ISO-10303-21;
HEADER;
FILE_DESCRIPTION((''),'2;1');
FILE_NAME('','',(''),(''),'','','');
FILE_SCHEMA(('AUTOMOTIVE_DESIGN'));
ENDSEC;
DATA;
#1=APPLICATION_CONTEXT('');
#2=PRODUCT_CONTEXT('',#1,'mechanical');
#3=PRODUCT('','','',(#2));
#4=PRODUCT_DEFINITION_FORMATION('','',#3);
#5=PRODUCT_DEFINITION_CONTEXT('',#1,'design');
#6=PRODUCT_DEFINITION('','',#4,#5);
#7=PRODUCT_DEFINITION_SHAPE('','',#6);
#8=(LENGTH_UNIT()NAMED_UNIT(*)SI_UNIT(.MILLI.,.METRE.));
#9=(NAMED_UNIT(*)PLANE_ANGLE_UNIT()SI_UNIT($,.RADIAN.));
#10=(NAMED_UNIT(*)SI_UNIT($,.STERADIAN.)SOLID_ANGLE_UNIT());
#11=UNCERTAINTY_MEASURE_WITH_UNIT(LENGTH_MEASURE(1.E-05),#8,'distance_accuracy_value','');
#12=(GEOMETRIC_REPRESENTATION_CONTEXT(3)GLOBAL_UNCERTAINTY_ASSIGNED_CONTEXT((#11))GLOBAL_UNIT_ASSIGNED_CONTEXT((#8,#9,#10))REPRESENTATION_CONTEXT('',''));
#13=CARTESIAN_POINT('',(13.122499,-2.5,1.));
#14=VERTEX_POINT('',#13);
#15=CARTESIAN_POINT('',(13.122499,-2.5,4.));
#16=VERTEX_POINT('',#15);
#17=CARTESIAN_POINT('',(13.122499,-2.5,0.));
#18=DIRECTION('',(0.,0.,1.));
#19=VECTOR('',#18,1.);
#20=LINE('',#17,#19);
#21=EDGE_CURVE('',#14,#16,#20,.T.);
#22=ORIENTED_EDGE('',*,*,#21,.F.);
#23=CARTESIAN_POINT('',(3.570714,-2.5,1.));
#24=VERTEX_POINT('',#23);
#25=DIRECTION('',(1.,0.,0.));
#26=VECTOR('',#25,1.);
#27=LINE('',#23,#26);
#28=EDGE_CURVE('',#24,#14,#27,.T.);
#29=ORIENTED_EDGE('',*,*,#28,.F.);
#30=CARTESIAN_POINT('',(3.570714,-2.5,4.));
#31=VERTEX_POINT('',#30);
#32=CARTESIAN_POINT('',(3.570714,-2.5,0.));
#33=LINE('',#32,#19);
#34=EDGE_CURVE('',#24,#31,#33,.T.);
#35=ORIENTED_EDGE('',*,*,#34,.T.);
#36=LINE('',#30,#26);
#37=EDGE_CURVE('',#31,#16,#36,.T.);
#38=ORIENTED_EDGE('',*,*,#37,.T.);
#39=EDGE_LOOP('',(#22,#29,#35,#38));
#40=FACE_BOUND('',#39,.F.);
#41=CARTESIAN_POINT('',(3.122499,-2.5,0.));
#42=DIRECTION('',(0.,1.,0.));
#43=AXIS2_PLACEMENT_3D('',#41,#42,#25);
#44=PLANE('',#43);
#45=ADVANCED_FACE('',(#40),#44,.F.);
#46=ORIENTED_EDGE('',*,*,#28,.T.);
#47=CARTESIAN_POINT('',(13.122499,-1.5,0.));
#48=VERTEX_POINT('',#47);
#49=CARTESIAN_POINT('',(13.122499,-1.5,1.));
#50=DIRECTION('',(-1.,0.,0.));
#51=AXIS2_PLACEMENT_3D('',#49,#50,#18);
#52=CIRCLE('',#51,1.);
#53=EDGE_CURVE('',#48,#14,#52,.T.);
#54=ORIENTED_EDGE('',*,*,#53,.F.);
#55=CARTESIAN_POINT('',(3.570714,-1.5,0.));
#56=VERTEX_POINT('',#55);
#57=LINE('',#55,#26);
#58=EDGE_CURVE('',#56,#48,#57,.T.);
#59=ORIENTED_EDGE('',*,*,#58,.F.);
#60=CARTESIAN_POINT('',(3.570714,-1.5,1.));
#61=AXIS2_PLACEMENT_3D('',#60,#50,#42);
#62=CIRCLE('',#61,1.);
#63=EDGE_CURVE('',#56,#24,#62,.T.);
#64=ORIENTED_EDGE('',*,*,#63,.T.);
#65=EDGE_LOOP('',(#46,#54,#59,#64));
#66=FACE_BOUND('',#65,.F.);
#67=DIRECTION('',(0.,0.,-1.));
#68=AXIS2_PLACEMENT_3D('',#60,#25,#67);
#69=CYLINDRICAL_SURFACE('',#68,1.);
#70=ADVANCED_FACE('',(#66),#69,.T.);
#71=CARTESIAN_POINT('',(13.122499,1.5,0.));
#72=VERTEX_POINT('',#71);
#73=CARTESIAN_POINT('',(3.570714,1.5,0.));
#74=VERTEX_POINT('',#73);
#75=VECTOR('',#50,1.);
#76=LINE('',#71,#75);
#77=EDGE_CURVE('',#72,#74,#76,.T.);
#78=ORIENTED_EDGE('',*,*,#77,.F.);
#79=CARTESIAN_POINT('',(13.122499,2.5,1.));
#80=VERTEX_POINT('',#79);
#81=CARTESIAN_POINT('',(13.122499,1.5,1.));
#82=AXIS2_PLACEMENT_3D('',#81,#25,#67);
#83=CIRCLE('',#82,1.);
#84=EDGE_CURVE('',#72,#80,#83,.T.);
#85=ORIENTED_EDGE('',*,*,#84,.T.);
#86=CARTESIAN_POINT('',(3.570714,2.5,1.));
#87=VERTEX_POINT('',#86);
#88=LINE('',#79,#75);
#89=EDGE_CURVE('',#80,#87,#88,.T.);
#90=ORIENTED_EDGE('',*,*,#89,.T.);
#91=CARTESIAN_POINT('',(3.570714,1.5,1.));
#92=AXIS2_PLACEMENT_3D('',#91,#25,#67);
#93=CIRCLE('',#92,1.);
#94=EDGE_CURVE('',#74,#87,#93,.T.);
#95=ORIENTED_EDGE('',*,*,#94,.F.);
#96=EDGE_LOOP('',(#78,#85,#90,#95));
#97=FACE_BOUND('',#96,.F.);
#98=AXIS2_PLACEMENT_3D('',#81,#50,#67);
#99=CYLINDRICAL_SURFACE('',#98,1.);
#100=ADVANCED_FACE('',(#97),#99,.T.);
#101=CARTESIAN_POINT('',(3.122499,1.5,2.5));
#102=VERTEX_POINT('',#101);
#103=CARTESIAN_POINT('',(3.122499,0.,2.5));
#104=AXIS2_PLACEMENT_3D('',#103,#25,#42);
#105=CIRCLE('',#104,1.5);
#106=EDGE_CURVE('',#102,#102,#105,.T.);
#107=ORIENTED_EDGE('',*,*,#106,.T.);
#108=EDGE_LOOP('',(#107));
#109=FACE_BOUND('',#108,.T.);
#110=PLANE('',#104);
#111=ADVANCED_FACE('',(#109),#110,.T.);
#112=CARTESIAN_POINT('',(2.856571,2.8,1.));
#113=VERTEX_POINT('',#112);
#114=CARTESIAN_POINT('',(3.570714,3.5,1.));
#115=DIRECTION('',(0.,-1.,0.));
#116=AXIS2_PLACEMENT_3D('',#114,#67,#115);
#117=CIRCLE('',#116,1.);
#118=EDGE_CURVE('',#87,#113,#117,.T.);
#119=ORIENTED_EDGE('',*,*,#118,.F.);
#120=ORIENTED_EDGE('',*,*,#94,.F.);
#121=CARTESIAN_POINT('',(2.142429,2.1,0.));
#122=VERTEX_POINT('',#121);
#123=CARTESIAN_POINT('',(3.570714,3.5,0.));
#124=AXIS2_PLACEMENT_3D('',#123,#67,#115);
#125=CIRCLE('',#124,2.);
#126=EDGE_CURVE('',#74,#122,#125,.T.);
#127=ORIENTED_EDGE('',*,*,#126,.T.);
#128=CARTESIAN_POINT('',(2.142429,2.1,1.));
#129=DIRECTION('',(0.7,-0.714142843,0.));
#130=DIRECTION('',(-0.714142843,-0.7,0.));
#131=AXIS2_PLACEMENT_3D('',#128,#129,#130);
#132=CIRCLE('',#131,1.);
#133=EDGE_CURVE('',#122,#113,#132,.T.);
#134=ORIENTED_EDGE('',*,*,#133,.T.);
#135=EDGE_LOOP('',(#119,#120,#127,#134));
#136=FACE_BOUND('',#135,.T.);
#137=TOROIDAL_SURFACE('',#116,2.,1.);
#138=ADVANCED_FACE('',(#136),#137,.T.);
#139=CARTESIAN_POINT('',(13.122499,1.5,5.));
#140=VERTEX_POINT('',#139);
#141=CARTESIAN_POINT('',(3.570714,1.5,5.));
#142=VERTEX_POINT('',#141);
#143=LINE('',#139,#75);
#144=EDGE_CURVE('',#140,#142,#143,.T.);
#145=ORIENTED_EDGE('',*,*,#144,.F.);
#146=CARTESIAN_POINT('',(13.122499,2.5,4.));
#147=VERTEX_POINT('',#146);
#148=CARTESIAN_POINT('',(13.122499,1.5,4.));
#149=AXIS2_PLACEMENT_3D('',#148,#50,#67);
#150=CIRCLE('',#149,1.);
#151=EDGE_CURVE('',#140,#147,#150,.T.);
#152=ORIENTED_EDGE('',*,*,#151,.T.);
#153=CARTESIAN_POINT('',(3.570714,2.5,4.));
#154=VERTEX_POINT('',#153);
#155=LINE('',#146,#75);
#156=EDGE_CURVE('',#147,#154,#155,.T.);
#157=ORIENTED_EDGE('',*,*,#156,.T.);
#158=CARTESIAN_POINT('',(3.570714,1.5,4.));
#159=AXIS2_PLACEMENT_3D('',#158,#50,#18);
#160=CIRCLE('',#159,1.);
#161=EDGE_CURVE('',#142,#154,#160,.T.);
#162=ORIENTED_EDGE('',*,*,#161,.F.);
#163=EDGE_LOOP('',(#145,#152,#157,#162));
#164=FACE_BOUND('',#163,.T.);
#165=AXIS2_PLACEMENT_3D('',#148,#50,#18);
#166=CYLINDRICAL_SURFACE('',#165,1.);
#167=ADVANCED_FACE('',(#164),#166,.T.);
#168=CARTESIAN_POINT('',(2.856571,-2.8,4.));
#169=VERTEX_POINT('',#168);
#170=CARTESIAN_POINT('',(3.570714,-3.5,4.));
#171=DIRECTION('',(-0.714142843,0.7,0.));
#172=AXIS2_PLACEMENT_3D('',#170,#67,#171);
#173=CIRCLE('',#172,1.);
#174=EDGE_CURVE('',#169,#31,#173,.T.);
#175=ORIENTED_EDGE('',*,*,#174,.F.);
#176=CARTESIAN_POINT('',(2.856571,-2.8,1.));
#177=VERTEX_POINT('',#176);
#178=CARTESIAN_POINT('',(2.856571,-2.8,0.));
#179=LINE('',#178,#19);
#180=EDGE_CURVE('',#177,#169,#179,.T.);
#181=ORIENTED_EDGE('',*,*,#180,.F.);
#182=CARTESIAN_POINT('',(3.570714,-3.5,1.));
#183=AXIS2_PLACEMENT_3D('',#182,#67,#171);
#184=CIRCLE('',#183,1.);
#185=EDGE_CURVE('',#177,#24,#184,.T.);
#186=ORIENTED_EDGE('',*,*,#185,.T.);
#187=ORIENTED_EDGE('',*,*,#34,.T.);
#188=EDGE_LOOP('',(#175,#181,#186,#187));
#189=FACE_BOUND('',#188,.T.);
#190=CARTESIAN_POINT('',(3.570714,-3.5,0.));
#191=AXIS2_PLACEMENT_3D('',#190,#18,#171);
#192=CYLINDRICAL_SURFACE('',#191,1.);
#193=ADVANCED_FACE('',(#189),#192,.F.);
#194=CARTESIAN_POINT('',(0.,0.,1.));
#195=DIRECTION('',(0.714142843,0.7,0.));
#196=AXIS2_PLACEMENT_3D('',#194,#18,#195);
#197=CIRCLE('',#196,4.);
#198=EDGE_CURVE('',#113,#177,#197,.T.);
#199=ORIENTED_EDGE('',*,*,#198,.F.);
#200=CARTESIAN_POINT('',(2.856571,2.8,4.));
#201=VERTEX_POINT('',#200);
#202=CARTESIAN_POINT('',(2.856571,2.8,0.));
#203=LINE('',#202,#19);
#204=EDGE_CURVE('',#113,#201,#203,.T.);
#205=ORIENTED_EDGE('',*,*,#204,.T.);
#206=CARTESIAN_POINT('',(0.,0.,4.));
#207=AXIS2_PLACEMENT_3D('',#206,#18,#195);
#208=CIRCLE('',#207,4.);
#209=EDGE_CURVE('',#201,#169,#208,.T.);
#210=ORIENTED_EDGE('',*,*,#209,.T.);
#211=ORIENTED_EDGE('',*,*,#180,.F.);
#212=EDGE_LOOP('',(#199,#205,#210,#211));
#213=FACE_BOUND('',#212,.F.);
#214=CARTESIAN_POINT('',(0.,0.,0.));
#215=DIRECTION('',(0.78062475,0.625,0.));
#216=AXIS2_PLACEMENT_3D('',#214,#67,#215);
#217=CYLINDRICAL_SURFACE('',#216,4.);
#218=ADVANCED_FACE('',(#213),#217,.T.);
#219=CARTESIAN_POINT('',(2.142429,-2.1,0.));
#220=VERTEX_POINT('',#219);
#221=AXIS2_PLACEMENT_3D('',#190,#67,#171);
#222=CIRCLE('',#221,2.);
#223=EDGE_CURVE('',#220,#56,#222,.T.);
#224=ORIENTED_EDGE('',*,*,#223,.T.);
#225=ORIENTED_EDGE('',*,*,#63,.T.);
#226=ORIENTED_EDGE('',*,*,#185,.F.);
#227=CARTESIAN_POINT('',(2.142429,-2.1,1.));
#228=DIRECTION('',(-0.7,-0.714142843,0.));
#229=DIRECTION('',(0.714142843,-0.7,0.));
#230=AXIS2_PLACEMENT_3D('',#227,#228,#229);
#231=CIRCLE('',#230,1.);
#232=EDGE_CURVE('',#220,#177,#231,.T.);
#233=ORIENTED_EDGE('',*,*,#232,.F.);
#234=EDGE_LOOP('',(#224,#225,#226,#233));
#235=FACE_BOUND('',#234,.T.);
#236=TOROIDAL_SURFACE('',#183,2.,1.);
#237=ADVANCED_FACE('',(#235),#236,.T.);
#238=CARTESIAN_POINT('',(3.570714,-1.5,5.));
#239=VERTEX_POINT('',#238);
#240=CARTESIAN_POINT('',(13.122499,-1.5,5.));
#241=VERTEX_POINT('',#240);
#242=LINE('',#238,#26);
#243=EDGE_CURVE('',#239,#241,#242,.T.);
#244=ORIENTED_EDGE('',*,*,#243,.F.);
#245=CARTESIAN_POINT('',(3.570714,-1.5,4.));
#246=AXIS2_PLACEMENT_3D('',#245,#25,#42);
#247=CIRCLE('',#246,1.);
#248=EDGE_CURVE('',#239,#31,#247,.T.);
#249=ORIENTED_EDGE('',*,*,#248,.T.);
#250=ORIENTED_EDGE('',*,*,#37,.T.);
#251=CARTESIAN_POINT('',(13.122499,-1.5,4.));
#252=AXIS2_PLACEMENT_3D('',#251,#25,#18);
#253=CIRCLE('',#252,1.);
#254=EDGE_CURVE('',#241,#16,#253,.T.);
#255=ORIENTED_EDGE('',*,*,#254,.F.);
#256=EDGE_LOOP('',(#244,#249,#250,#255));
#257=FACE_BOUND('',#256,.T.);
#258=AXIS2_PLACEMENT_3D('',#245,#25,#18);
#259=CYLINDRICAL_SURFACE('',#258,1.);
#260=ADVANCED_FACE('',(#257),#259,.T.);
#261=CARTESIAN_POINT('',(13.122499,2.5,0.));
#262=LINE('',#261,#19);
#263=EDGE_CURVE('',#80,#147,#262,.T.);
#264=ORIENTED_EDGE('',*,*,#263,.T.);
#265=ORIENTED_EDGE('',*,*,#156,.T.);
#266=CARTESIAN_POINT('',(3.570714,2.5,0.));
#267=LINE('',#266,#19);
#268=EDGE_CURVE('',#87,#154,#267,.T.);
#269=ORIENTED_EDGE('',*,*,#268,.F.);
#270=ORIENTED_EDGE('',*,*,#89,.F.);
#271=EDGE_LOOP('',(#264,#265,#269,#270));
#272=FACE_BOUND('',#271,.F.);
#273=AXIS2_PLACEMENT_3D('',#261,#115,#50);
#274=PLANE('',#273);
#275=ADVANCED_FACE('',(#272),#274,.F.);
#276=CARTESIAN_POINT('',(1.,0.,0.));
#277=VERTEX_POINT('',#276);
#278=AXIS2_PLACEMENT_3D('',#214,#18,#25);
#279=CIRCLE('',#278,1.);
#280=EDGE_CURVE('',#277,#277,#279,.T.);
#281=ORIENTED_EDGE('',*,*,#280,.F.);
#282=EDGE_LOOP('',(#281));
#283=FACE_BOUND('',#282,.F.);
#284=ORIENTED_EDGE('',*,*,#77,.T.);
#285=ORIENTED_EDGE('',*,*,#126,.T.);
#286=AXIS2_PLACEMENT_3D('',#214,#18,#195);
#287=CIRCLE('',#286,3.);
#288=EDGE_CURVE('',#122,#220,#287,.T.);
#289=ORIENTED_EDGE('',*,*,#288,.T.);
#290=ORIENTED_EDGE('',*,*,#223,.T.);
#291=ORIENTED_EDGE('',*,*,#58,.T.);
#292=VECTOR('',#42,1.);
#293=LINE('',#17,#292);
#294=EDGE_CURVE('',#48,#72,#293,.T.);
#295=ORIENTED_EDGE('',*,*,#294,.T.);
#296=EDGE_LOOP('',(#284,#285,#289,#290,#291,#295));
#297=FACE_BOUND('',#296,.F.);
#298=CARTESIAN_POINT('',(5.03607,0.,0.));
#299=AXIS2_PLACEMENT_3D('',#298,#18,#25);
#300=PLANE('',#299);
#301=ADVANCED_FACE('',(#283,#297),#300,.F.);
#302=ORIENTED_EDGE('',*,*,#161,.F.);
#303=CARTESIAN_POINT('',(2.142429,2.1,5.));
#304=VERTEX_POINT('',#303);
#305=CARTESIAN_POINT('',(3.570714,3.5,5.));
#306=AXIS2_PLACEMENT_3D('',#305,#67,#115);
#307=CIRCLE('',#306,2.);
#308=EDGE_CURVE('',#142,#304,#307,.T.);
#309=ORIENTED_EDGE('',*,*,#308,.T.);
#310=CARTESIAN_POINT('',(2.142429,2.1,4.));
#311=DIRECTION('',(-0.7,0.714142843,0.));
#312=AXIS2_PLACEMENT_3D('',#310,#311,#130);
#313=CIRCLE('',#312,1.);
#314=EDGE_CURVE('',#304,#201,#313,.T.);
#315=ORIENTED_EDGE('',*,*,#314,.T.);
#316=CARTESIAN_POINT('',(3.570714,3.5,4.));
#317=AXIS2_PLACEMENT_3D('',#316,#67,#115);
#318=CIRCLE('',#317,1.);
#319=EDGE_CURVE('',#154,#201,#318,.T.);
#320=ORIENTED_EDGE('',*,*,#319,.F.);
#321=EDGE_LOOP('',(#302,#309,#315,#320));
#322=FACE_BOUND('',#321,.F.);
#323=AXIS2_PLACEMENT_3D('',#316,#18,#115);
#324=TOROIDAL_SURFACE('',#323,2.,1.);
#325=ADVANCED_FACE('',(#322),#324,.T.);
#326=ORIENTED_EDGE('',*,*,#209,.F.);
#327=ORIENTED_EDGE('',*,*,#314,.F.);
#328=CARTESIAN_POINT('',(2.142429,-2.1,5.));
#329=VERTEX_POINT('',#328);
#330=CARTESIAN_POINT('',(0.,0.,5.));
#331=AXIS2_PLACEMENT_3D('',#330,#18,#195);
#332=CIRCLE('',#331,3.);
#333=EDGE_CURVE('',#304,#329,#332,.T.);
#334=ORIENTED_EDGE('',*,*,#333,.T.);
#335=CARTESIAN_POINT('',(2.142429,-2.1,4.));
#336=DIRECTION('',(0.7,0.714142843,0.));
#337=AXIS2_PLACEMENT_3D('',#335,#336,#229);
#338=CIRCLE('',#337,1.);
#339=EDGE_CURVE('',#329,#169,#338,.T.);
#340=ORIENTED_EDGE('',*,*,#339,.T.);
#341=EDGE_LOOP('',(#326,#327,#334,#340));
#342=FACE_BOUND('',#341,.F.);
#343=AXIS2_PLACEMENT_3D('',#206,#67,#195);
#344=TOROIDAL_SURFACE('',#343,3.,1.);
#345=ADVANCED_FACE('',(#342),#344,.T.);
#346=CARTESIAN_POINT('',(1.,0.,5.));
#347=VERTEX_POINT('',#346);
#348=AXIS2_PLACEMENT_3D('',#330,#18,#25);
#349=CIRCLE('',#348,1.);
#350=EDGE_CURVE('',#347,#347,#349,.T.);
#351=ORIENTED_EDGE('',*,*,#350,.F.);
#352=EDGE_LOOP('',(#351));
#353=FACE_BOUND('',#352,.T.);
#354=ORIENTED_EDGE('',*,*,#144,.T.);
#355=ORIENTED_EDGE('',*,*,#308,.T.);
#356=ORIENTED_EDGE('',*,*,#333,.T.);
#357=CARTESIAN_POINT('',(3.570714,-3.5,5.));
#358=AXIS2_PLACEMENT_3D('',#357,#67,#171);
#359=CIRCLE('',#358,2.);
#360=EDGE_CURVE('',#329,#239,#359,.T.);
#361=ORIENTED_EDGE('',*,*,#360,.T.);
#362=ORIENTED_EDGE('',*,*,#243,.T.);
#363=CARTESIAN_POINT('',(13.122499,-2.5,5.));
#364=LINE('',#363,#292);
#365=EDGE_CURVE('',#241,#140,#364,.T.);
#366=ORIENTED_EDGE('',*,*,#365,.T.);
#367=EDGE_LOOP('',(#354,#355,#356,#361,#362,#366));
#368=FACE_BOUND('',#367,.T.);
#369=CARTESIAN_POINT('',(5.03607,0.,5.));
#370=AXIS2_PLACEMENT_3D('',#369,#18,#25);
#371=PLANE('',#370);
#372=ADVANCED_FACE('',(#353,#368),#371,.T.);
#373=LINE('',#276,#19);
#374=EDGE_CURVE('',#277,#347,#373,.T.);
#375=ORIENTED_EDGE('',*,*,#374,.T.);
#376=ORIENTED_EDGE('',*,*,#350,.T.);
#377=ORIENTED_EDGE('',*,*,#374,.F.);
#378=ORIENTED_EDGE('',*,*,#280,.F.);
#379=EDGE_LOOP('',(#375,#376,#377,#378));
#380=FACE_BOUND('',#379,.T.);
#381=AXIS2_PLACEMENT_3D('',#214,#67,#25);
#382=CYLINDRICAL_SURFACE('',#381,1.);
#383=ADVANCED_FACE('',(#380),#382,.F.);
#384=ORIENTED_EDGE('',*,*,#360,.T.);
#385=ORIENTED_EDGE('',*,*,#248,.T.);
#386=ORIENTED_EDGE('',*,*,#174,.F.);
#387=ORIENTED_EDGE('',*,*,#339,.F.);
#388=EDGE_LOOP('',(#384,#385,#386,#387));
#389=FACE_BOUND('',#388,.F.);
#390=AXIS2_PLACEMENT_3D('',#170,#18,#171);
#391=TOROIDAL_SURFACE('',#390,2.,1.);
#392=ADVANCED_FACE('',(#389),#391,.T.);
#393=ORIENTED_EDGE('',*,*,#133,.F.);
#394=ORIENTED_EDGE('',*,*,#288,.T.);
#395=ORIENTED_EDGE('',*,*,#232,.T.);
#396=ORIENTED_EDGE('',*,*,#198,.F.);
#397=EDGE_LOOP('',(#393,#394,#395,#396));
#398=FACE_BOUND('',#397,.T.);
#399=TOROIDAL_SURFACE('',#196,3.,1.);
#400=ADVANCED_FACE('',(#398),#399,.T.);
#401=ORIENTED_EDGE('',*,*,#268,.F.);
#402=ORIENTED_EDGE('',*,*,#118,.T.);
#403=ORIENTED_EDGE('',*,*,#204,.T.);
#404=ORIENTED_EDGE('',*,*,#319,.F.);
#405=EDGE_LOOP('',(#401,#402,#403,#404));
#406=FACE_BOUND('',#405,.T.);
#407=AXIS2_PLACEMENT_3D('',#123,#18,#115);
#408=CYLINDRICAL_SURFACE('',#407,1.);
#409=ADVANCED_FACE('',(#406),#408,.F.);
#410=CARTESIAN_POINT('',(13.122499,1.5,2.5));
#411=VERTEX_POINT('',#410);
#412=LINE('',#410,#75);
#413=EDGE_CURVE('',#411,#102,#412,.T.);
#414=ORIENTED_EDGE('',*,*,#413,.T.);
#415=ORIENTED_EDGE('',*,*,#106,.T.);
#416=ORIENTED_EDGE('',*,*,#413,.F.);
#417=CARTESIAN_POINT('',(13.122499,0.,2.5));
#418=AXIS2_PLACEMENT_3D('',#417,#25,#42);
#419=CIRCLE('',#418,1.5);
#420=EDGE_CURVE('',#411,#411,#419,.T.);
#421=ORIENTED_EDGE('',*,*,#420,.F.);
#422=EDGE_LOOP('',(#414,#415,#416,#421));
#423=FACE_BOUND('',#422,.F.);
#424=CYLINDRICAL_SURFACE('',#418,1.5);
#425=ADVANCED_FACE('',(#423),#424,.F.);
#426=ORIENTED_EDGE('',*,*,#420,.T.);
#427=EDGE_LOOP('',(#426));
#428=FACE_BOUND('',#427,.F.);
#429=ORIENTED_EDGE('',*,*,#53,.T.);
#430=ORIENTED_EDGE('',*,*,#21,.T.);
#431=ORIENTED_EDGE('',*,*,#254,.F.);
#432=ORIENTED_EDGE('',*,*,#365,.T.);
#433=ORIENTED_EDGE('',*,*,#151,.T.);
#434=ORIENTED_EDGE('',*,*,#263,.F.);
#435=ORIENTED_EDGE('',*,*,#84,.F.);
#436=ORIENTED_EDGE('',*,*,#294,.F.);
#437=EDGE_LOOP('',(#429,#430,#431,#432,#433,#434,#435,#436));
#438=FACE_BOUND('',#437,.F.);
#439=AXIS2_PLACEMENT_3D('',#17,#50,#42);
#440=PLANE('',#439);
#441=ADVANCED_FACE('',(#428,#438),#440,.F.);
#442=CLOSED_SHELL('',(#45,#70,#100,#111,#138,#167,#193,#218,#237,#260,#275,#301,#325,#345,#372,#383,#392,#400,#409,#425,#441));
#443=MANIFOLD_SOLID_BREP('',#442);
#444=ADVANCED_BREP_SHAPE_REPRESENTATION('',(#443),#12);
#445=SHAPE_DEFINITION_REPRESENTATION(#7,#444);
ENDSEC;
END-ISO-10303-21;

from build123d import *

# Parameters (mm, degrees)
F0_R     = 1
F1_DEPTH = 5
F2_R     = 1.5
F3_DEPTH = 10
F4_F1_R  = 1
F4_F2_R  = 1


with BuildPart() as f1:
    # F0 (on Top) → F1 (new body)
    with BuildSketch(Plane.XY):
        with BuildLine():
            Line((13.1224989992, 2.5), (3.1224989992, 2.5))
            ThreePointArc((3.1224989992, 2.5), (-4, 0), (3.1224989992, -2.5))
            Line((3.1224989992, -2.5), (13.1224989992, -2.5))
            Line((13.1224989992, -2.5), (13.1224989992, 2.5))
        make_face()
        Circle(F0_R, mode=Mode.SUBTRACT)
    extrude(amount=F1_DEPTH)

    # F2 (on face) → F3 (cut)
    with BuildSketch(Plane.YZ.offset(13.1224989992)):
        with Locations((0, 2.5)):
            Circle(F2_R)
    extrude(amount=-F3_DEPTH, mode=Mode.SUBTRACT)

    # F4: fillet of radius 1 on 4 edges, made by hand

    # F4_f1
    f4_f1_edges = [f1.edges().sort_by_distance(p)[0] for p in [
        (3.1224989992, 2.5, 2.5),
        (3.1224989992, -2.5, 2.5),
    ]]
    fillet(f4_f1_edges, radius=F4_F1_R)

    # F4_f2
    f4_f2_edges = [f1.edges().sort_by_distance(p)[0] for p in [
        (8.3466066067, -2.5, 5),
        (8.3466066067, -2.5, 0),
        (3.1834158797, -2.5780455543, 0),
        (3.1834158797, -2.5780455543, 5),
    ]]
    fillet(f4_f2_edges, radius=F4_F2_R)


solid = f1.part
